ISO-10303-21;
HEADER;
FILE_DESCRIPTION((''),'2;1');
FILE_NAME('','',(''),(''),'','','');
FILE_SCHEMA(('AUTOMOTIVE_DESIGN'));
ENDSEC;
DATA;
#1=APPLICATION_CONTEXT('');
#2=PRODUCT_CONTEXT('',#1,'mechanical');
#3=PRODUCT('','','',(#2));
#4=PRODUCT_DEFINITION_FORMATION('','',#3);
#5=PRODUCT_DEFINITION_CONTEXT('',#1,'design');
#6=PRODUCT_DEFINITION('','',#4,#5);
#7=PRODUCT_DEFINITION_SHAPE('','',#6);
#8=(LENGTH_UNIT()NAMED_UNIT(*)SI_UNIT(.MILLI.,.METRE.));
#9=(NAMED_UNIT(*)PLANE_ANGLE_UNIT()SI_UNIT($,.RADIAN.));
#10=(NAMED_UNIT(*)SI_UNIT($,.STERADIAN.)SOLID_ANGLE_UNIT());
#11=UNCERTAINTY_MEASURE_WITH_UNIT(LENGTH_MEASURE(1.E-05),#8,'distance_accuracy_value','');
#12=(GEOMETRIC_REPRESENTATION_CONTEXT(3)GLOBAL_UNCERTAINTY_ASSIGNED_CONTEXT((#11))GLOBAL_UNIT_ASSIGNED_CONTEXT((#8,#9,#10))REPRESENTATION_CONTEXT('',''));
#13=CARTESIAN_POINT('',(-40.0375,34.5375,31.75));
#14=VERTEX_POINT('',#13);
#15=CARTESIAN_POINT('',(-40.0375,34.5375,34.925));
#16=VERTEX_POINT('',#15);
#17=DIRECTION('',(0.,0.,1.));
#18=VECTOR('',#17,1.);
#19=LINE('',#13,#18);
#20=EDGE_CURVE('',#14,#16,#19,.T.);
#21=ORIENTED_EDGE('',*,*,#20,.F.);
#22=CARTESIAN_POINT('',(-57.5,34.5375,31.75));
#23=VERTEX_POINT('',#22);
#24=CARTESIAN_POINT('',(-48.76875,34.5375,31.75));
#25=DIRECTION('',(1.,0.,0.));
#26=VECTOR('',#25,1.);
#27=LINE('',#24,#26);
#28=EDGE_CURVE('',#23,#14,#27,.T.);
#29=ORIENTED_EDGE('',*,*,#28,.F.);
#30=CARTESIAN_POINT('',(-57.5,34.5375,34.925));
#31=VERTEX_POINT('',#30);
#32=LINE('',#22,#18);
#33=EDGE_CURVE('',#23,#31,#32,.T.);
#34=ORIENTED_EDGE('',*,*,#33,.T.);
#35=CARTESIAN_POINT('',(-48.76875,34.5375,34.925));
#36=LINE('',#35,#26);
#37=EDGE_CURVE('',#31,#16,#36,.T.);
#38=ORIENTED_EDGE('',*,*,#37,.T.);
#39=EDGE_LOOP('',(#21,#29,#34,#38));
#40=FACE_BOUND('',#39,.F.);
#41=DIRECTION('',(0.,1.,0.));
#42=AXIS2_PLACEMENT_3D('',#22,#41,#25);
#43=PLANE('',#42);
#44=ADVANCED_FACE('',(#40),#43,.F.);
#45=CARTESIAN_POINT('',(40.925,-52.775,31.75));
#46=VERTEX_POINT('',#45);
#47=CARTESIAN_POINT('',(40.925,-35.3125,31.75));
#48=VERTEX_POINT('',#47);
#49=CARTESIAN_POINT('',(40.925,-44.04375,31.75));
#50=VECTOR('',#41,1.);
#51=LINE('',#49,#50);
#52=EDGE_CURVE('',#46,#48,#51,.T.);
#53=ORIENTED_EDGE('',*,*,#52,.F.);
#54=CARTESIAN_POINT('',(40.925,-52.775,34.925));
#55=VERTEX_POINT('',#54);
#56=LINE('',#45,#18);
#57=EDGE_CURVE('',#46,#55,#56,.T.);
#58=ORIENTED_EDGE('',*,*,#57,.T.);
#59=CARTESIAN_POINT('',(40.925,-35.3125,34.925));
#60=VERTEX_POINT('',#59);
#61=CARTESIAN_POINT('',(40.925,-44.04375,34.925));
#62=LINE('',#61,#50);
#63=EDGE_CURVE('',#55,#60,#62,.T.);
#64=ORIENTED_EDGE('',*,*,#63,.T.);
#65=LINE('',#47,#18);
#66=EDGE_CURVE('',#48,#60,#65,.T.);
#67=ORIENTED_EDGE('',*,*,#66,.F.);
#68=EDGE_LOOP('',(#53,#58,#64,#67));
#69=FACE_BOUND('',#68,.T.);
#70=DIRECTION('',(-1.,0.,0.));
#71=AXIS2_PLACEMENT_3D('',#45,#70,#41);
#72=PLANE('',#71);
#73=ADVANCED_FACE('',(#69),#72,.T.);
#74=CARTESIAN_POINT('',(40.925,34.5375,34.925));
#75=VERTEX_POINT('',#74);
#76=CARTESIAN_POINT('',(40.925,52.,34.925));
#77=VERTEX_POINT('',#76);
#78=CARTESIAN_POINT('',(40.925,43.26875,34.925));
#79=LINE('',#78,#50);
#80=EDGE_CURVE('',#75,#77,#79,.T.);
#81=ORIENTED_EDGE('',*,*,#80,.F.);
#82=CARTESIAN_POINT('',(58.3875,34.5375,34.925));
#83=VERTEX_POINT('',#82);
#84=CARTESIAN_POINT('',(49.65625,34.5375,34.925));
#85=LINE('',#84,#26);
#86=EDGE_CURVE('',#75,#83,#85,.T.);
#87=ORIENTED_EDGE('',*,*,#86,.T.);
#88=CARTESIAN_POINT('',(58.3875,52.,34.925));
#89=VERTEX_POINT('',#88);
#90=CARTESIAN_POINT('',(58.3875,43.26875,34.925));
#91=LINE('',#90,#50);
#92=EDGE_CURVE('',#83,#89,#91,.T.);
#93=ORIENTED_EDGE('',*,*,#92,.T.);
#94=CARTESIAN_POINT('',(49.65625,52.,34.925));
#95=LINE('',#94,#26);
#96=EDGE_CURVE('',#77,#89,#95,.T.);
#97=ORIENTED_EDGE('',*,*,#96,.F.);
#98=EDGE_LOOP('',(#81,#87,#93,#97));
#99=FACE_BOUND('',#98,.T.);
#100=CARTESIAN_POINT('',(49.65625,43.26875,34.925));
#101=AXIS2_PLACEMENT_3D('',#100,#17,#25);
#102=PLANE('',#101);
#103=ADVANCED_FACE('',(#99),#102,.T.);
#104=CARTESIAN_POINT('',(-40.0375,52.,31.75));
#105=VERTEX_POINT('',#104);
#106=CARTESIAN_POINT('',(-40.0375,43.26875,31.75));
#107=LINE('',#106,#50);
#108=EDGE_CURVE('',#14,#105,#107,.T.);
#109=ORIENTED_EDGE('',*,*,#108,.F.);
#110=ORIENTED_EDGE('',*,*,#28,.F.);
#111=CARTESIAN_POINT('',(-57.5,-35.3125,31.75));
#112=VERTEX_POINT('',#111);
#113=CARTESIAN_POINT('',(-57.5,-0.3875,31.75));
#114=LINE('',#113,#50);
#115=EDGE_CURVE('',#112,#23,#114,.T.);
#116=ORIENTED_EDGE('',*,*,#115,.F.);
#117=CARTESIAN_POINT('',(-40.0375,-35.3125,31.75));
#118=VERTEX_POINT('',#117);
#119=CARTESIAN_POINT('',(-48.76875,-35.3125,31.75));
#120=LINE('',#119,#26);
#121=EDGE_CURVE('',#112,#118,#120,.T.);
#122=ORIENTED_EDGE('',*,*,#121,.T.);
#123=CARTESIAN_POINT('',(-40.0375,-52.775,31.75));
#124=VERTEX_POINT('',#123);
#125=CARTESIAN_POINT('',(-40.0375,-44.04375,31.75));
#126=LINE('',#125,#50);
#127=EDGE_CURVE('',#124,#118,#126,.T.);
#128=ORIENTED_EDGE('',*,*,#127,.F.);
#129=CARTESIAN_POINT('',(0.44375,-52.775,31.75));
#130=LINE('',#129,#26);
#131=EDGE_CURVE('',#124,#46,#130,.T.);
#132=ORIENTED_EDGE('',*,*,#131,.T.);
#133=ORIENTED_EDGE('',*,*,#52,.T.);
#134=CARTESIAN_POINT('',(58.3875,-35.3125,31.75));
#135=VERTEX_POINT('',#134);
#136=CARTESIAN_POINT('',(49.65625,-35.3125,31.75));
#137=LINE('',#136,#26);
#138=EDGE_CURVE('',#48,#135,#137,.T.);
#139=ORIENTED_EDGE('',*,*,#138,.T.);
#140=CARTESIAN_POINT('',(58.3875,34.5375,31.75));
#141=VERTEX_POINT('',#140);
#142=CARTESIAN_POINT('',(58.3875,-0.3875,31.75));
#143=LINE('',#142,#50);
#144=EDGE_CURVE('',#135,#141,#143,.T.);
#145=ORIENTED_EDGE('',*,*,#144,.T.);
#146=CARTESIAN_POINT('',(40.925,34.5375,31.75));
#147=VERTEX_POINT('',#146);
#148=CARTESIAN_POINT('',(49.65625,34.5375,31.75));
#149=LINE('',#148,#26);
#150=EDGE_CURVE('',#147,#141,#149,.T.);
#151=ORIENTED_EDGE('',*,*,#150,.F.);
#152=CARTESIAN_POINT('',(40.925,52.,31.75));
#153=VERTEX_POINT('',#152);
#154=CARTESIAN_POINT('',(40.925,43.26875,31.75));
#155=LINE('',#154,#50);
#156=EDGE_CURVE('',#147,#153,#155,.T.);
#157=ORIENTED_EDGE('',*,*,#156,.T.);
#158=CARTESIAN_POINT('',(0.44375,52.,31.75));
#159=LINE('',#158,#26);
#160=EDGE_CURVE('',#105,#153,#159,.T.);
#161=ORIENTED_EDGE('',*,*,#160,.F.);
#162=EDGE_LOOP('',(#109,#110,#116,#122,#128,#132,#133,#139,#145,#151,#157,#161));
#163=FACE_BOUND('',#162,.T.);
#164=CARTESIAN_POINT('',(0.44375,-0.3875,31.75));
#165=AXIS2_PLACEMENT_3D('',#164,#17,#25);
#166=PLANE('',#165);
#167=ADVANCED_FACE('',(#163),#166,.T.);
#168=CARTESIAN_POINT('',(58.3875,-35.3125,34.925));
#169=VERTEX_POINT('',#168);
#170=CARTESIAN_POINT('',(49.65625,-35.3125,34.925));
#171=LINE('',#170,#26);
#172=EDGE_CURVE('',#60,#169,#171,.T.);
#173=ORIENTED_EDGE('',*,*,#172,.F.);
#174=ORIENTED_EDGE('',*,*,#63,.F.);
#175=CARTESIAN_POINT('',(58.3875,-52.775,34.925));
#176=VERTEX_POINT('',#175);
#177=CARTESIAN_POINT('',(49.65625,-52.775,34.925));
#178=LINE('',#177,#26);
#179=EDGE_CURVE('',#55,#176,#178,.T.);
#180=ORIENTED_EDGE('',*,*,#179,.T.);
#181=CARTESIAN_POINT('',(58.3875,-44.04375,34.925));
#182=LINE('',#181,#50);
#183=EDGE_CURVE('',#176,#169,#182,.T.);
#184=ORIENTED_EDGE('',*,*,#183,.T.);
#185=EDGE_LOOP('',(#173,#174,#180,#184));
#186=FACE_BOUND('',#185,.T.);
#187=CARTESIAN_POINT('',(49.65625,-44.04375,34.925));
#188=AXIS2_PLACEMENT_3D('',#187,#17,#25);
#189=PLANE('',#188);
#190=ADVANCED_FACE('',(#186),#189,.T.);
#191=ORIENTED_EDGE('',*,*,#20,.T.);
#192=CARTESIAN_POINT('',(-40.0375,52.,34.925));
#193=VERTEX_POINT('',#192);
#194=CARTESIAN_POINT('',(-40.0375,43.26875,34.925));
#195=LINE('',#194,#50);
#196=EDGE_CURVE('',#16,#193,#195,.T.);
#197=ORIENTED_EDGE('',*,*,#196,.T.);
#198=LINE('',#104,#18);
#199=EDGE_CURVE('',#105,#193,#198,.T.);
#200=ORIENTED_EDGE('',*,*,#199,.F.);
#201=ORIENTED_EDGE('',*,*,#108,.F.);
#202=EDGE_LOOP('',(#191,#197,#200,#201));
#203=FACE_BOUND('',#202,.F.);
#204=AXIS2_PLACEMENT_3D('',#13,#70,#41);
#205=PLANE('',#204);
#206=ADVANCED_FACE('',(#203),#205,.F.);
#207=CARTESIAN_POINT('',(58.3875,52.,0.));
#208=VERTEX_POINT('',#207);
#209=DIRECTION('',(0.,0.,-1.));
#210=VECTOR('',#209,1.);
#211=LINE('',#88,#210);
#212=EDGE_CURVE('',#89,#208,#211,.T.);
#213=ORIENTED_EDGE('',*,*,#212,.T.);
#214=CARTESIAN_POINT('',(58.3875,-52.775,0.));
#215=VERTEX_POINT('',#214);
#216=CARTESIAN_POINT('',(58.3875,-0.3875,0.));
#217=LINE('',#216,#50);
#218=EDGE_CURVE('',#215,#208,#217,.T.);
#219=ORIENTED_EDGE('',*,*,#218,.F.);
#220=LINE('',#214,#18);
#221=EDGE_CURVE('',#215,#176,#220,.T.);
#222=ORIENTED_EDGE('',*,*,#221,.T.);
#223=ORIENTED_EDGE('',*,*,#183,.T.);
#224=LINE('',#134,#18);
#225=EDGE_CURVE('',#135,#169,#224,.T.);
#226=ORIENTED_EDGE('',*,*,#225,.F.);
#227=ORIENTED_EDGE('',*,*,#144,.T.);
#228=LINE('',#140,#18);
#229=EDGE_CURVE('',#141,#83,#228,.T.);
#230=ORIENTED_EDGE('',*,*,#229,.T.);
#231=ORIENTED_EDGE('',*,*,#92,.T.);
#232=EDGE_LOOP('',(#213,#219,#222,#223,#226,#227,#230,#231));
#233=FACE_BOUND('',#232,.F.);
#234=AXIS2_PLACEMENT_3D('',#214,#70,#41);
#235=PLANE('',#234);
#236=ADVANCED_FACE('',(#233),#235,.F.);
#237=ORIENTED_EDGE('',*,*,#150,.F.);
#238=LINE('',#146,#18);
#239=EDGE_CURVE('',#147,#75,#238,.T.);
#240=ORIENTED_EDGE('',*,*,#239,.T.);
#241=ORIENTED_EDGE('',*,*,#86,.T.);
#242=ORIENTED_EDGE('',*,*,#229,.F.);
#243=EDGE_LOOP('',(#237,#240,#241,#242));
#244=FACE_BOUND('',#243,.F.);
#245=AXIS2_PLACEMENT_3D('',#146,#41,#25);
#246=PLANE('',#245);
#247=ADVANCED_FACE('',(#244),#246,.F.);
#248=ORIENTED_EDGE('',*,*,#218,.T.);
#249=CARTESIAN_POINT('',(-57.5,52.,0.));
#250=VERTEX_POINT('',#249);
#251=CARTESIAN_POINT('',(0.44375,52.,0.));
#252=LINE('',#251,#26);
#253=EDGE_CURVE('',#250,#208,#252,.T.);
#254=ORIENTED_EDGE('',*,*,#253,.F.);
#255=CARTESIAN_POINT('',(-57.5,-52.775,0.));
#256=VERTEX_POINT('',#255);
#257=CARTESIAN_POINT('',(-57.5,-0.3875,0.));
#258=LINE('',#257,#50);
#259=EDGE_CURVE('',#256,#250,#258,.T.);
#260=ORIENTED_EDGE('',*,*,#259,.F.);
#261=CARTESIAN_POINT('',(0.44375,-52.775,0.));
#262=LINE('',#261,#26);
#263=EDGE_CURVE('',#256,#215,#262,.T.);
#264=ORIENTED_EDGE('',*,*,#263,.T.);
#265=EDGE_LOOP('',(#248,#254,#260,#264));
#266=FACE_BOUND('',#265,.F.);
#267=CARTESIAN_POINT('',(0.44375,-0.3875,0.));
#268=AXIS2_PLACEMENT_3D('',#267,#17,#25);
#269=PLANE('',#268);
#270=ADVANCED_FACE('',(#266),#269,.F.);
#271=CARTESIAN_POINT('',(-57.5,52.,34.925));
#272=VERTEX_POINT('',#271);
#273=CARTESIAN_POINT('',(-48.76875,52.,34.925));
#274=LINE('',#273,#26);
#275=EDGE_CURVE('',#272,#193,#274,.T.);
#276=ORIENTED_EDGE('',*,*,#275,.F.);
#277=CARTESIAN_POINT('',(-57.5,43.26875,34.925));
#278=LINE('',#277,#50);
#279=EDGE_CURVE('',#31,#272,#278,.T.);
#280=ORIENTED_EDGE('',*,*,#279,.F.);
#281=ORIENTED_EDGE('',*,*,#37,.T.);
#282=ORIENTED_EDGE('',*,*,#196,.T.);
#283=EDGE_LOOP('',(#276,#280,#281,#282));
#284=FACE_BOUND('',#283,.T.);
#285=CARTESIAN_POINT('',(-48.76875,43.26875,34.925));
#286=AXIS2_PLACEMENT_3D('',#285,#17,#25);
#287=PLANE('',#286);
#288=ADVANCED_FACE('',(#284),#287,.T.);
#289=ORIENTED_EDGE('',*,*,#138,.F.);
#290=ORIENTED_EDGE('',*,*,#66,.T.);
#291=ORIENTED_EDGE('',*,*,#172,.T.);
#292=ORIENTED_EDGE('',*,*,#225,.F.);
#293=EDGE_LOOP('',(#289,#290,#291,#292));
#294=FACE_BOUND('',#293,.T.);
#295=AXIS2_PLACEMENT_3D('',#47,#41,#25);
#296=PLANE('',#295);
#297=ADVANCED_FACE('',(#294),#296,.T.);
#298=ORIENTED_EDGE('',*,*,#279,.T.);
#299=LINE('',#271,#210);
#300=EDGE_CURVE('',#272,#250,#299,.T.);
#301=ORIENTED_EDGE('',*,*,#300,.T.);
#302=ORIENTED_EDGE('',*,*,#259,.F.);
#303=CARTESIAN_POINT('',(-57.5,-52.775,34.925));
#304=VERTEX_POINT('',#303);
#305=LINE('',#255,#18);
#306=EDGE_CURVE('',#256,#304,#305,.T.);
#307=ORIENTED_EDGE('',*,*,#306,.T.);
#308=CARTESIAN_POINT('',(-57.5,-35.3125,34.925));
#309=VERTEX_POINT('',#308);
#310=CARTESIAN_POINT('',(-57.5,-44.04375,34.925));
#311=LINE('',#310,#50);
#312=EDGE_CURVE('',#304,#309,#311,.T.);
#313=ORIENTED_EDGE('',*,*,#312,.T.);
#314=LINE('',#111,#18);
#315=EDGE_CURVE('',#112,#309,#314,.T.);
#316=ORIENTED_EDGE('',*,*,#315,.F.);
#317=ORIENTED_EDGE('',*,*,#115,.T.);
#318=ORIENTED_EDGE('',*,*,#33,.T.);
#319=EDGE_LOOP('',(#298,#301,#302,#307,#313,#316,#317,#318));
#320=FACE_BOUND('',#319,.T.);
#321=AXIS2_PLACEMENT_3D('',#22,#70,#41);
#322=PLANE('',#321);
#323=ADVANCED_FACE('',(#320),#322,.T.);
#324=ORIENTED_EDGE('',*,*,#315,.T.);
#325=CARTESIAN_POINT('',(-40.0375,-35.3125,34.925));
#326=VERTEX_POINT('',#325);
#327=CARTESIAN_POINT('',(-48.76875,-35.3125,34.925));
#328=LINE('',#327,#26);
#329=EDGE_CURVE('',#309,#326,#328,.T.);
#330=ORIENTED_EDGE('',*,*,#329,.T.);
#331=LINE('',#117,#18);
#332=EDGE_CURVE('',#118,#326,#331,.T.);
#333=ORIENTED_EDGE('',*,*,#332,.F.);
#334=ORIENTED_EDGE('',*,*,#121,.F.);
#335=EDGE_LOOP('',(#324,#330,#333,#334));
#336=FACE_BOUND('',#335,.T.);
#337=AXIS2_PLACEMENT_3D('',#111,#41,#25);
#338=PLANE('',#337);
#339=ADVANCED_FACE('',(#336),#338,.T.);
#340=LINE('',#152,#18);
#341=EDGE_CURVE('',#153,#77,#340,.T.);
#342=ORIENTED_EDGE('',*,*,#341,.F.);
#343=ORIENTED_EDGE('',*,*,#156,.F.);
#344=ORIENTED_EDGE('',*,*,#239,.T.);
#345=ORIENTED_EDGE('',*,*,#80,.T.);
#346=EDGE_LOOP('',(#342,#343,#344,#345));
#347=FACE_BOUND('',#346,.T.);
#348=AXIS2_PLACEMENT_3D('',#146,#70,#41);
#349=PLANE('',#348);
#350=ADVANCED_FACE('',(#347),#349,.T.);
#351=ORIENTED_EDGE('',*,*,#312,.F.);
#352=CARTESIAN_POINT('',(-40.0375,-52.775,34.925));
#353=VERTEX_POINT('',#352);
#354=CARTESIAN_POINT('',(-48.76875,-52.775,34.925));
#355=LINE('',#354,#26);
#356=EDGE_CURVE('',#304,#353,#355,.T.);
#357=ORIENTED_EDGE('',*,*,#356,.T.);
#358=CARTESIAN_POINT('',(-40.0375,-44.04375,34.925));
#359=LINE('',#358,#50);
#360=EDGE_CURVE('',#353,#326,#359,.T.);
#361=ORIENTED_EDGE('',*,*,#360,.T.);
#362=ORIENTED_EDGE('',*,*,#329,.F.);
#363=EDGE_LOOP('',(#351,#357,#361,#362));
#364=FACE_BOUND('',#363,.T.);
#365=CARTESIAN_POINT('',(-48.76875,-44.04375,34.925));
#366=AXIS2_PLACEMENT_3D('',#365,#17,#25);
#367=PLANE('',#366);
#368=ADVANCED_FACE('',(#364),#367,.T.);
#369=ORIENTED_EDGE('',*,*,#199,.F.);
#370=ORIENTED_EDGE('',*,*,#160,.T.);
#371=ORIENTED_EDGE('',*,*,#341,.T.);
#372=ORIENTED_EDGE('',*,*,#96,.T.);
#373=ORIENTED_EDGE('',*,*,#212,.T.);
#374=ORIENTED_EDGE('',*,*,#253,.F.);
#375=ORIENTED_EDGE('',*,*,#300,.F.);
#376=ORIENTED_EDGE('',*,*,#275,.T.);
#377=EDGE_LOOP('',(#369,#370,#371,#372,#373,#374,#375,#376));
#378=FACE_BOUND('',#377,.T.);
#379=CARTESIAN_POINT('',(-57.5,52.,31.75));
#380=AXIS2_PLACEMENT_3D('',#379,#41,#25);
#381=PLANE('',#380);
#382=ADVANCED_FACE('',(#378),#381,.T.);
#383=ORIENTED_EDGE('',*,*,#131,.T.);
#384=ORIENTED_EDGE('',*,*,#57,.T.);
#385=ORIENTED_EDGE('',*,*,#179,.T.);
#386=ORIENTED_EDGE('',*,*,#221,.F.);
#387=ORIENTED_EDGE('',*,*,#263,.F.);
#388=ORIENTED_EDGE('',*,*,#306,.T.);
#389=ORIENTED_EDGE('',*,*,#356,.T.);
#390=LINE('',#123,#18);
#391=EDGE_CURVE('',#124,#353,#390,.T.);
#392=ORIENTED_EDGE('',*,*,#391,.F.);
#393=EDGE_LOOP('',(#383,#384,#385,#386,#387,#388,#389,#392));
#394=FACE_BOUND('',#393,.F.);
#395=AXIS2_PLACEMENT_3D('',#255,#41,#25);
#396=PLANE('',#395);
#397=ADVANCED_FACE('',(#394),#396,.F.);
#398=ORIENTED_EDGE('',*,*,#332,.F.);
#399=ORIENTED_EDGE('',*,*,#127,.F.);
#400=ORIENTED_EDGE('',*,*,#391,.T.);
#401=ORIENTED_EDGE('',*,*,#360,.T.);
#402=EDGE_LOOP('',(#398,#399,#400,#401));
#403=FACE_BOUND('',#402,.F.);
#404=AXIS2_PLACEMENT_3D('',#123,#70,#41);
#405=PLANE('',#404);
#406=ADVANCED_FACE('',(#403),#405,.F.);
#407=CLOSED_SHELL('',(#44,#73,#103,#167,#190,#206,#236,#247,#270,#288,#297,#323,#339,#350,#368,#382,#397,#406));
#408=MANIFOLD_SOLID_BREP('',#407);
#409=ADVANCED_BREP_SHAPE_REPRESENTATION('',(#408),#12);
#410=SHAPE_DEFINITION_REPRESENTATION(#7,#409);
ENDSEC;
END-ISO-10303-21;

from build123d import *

# Parameters (mm, degrees)
F0_W     = 115.8875
F0_H     = 104.775
F1_DEPTH = 31.75
F2_W     = 17.4625
F2_H     = 17.4625
F3_DEPTH = 3.175


# Not quite as in the source:
# - a length typed as a fraction of an inch, garbled in the dataset ("3 / 203.2 mm" for 3/8 in), is restored


with BuildPart() as f1:
    # F0 (on Top) → F1 (new body)
    with BuildSketch(Plane.XY):
        with Locations((0.44375, -0.3875)):
            Rectangle(F0_W, F0_H)
    extrude(amount=F1_DEPTH)

    # F2 (on face) → F3 (join)
    with BuildSketch(Plane.XY.offset(31.75)):
        with Locations((-48.76875, 43.26875)):
            Rectangle(F2_W, F2_H)
        with Locations((49.65625, 43.26875)):
            Rectangle(F2_W, F2_H)
        with Locations((-48.76875, -44.04375)):
            Rectangle(F2_W, F2_H)
        with Locations((49.65625, -44.04375)):
            Rectangle(F2_W, F2_H)
    extrude(amount=F3_DEPTH)


solid = f1.part
